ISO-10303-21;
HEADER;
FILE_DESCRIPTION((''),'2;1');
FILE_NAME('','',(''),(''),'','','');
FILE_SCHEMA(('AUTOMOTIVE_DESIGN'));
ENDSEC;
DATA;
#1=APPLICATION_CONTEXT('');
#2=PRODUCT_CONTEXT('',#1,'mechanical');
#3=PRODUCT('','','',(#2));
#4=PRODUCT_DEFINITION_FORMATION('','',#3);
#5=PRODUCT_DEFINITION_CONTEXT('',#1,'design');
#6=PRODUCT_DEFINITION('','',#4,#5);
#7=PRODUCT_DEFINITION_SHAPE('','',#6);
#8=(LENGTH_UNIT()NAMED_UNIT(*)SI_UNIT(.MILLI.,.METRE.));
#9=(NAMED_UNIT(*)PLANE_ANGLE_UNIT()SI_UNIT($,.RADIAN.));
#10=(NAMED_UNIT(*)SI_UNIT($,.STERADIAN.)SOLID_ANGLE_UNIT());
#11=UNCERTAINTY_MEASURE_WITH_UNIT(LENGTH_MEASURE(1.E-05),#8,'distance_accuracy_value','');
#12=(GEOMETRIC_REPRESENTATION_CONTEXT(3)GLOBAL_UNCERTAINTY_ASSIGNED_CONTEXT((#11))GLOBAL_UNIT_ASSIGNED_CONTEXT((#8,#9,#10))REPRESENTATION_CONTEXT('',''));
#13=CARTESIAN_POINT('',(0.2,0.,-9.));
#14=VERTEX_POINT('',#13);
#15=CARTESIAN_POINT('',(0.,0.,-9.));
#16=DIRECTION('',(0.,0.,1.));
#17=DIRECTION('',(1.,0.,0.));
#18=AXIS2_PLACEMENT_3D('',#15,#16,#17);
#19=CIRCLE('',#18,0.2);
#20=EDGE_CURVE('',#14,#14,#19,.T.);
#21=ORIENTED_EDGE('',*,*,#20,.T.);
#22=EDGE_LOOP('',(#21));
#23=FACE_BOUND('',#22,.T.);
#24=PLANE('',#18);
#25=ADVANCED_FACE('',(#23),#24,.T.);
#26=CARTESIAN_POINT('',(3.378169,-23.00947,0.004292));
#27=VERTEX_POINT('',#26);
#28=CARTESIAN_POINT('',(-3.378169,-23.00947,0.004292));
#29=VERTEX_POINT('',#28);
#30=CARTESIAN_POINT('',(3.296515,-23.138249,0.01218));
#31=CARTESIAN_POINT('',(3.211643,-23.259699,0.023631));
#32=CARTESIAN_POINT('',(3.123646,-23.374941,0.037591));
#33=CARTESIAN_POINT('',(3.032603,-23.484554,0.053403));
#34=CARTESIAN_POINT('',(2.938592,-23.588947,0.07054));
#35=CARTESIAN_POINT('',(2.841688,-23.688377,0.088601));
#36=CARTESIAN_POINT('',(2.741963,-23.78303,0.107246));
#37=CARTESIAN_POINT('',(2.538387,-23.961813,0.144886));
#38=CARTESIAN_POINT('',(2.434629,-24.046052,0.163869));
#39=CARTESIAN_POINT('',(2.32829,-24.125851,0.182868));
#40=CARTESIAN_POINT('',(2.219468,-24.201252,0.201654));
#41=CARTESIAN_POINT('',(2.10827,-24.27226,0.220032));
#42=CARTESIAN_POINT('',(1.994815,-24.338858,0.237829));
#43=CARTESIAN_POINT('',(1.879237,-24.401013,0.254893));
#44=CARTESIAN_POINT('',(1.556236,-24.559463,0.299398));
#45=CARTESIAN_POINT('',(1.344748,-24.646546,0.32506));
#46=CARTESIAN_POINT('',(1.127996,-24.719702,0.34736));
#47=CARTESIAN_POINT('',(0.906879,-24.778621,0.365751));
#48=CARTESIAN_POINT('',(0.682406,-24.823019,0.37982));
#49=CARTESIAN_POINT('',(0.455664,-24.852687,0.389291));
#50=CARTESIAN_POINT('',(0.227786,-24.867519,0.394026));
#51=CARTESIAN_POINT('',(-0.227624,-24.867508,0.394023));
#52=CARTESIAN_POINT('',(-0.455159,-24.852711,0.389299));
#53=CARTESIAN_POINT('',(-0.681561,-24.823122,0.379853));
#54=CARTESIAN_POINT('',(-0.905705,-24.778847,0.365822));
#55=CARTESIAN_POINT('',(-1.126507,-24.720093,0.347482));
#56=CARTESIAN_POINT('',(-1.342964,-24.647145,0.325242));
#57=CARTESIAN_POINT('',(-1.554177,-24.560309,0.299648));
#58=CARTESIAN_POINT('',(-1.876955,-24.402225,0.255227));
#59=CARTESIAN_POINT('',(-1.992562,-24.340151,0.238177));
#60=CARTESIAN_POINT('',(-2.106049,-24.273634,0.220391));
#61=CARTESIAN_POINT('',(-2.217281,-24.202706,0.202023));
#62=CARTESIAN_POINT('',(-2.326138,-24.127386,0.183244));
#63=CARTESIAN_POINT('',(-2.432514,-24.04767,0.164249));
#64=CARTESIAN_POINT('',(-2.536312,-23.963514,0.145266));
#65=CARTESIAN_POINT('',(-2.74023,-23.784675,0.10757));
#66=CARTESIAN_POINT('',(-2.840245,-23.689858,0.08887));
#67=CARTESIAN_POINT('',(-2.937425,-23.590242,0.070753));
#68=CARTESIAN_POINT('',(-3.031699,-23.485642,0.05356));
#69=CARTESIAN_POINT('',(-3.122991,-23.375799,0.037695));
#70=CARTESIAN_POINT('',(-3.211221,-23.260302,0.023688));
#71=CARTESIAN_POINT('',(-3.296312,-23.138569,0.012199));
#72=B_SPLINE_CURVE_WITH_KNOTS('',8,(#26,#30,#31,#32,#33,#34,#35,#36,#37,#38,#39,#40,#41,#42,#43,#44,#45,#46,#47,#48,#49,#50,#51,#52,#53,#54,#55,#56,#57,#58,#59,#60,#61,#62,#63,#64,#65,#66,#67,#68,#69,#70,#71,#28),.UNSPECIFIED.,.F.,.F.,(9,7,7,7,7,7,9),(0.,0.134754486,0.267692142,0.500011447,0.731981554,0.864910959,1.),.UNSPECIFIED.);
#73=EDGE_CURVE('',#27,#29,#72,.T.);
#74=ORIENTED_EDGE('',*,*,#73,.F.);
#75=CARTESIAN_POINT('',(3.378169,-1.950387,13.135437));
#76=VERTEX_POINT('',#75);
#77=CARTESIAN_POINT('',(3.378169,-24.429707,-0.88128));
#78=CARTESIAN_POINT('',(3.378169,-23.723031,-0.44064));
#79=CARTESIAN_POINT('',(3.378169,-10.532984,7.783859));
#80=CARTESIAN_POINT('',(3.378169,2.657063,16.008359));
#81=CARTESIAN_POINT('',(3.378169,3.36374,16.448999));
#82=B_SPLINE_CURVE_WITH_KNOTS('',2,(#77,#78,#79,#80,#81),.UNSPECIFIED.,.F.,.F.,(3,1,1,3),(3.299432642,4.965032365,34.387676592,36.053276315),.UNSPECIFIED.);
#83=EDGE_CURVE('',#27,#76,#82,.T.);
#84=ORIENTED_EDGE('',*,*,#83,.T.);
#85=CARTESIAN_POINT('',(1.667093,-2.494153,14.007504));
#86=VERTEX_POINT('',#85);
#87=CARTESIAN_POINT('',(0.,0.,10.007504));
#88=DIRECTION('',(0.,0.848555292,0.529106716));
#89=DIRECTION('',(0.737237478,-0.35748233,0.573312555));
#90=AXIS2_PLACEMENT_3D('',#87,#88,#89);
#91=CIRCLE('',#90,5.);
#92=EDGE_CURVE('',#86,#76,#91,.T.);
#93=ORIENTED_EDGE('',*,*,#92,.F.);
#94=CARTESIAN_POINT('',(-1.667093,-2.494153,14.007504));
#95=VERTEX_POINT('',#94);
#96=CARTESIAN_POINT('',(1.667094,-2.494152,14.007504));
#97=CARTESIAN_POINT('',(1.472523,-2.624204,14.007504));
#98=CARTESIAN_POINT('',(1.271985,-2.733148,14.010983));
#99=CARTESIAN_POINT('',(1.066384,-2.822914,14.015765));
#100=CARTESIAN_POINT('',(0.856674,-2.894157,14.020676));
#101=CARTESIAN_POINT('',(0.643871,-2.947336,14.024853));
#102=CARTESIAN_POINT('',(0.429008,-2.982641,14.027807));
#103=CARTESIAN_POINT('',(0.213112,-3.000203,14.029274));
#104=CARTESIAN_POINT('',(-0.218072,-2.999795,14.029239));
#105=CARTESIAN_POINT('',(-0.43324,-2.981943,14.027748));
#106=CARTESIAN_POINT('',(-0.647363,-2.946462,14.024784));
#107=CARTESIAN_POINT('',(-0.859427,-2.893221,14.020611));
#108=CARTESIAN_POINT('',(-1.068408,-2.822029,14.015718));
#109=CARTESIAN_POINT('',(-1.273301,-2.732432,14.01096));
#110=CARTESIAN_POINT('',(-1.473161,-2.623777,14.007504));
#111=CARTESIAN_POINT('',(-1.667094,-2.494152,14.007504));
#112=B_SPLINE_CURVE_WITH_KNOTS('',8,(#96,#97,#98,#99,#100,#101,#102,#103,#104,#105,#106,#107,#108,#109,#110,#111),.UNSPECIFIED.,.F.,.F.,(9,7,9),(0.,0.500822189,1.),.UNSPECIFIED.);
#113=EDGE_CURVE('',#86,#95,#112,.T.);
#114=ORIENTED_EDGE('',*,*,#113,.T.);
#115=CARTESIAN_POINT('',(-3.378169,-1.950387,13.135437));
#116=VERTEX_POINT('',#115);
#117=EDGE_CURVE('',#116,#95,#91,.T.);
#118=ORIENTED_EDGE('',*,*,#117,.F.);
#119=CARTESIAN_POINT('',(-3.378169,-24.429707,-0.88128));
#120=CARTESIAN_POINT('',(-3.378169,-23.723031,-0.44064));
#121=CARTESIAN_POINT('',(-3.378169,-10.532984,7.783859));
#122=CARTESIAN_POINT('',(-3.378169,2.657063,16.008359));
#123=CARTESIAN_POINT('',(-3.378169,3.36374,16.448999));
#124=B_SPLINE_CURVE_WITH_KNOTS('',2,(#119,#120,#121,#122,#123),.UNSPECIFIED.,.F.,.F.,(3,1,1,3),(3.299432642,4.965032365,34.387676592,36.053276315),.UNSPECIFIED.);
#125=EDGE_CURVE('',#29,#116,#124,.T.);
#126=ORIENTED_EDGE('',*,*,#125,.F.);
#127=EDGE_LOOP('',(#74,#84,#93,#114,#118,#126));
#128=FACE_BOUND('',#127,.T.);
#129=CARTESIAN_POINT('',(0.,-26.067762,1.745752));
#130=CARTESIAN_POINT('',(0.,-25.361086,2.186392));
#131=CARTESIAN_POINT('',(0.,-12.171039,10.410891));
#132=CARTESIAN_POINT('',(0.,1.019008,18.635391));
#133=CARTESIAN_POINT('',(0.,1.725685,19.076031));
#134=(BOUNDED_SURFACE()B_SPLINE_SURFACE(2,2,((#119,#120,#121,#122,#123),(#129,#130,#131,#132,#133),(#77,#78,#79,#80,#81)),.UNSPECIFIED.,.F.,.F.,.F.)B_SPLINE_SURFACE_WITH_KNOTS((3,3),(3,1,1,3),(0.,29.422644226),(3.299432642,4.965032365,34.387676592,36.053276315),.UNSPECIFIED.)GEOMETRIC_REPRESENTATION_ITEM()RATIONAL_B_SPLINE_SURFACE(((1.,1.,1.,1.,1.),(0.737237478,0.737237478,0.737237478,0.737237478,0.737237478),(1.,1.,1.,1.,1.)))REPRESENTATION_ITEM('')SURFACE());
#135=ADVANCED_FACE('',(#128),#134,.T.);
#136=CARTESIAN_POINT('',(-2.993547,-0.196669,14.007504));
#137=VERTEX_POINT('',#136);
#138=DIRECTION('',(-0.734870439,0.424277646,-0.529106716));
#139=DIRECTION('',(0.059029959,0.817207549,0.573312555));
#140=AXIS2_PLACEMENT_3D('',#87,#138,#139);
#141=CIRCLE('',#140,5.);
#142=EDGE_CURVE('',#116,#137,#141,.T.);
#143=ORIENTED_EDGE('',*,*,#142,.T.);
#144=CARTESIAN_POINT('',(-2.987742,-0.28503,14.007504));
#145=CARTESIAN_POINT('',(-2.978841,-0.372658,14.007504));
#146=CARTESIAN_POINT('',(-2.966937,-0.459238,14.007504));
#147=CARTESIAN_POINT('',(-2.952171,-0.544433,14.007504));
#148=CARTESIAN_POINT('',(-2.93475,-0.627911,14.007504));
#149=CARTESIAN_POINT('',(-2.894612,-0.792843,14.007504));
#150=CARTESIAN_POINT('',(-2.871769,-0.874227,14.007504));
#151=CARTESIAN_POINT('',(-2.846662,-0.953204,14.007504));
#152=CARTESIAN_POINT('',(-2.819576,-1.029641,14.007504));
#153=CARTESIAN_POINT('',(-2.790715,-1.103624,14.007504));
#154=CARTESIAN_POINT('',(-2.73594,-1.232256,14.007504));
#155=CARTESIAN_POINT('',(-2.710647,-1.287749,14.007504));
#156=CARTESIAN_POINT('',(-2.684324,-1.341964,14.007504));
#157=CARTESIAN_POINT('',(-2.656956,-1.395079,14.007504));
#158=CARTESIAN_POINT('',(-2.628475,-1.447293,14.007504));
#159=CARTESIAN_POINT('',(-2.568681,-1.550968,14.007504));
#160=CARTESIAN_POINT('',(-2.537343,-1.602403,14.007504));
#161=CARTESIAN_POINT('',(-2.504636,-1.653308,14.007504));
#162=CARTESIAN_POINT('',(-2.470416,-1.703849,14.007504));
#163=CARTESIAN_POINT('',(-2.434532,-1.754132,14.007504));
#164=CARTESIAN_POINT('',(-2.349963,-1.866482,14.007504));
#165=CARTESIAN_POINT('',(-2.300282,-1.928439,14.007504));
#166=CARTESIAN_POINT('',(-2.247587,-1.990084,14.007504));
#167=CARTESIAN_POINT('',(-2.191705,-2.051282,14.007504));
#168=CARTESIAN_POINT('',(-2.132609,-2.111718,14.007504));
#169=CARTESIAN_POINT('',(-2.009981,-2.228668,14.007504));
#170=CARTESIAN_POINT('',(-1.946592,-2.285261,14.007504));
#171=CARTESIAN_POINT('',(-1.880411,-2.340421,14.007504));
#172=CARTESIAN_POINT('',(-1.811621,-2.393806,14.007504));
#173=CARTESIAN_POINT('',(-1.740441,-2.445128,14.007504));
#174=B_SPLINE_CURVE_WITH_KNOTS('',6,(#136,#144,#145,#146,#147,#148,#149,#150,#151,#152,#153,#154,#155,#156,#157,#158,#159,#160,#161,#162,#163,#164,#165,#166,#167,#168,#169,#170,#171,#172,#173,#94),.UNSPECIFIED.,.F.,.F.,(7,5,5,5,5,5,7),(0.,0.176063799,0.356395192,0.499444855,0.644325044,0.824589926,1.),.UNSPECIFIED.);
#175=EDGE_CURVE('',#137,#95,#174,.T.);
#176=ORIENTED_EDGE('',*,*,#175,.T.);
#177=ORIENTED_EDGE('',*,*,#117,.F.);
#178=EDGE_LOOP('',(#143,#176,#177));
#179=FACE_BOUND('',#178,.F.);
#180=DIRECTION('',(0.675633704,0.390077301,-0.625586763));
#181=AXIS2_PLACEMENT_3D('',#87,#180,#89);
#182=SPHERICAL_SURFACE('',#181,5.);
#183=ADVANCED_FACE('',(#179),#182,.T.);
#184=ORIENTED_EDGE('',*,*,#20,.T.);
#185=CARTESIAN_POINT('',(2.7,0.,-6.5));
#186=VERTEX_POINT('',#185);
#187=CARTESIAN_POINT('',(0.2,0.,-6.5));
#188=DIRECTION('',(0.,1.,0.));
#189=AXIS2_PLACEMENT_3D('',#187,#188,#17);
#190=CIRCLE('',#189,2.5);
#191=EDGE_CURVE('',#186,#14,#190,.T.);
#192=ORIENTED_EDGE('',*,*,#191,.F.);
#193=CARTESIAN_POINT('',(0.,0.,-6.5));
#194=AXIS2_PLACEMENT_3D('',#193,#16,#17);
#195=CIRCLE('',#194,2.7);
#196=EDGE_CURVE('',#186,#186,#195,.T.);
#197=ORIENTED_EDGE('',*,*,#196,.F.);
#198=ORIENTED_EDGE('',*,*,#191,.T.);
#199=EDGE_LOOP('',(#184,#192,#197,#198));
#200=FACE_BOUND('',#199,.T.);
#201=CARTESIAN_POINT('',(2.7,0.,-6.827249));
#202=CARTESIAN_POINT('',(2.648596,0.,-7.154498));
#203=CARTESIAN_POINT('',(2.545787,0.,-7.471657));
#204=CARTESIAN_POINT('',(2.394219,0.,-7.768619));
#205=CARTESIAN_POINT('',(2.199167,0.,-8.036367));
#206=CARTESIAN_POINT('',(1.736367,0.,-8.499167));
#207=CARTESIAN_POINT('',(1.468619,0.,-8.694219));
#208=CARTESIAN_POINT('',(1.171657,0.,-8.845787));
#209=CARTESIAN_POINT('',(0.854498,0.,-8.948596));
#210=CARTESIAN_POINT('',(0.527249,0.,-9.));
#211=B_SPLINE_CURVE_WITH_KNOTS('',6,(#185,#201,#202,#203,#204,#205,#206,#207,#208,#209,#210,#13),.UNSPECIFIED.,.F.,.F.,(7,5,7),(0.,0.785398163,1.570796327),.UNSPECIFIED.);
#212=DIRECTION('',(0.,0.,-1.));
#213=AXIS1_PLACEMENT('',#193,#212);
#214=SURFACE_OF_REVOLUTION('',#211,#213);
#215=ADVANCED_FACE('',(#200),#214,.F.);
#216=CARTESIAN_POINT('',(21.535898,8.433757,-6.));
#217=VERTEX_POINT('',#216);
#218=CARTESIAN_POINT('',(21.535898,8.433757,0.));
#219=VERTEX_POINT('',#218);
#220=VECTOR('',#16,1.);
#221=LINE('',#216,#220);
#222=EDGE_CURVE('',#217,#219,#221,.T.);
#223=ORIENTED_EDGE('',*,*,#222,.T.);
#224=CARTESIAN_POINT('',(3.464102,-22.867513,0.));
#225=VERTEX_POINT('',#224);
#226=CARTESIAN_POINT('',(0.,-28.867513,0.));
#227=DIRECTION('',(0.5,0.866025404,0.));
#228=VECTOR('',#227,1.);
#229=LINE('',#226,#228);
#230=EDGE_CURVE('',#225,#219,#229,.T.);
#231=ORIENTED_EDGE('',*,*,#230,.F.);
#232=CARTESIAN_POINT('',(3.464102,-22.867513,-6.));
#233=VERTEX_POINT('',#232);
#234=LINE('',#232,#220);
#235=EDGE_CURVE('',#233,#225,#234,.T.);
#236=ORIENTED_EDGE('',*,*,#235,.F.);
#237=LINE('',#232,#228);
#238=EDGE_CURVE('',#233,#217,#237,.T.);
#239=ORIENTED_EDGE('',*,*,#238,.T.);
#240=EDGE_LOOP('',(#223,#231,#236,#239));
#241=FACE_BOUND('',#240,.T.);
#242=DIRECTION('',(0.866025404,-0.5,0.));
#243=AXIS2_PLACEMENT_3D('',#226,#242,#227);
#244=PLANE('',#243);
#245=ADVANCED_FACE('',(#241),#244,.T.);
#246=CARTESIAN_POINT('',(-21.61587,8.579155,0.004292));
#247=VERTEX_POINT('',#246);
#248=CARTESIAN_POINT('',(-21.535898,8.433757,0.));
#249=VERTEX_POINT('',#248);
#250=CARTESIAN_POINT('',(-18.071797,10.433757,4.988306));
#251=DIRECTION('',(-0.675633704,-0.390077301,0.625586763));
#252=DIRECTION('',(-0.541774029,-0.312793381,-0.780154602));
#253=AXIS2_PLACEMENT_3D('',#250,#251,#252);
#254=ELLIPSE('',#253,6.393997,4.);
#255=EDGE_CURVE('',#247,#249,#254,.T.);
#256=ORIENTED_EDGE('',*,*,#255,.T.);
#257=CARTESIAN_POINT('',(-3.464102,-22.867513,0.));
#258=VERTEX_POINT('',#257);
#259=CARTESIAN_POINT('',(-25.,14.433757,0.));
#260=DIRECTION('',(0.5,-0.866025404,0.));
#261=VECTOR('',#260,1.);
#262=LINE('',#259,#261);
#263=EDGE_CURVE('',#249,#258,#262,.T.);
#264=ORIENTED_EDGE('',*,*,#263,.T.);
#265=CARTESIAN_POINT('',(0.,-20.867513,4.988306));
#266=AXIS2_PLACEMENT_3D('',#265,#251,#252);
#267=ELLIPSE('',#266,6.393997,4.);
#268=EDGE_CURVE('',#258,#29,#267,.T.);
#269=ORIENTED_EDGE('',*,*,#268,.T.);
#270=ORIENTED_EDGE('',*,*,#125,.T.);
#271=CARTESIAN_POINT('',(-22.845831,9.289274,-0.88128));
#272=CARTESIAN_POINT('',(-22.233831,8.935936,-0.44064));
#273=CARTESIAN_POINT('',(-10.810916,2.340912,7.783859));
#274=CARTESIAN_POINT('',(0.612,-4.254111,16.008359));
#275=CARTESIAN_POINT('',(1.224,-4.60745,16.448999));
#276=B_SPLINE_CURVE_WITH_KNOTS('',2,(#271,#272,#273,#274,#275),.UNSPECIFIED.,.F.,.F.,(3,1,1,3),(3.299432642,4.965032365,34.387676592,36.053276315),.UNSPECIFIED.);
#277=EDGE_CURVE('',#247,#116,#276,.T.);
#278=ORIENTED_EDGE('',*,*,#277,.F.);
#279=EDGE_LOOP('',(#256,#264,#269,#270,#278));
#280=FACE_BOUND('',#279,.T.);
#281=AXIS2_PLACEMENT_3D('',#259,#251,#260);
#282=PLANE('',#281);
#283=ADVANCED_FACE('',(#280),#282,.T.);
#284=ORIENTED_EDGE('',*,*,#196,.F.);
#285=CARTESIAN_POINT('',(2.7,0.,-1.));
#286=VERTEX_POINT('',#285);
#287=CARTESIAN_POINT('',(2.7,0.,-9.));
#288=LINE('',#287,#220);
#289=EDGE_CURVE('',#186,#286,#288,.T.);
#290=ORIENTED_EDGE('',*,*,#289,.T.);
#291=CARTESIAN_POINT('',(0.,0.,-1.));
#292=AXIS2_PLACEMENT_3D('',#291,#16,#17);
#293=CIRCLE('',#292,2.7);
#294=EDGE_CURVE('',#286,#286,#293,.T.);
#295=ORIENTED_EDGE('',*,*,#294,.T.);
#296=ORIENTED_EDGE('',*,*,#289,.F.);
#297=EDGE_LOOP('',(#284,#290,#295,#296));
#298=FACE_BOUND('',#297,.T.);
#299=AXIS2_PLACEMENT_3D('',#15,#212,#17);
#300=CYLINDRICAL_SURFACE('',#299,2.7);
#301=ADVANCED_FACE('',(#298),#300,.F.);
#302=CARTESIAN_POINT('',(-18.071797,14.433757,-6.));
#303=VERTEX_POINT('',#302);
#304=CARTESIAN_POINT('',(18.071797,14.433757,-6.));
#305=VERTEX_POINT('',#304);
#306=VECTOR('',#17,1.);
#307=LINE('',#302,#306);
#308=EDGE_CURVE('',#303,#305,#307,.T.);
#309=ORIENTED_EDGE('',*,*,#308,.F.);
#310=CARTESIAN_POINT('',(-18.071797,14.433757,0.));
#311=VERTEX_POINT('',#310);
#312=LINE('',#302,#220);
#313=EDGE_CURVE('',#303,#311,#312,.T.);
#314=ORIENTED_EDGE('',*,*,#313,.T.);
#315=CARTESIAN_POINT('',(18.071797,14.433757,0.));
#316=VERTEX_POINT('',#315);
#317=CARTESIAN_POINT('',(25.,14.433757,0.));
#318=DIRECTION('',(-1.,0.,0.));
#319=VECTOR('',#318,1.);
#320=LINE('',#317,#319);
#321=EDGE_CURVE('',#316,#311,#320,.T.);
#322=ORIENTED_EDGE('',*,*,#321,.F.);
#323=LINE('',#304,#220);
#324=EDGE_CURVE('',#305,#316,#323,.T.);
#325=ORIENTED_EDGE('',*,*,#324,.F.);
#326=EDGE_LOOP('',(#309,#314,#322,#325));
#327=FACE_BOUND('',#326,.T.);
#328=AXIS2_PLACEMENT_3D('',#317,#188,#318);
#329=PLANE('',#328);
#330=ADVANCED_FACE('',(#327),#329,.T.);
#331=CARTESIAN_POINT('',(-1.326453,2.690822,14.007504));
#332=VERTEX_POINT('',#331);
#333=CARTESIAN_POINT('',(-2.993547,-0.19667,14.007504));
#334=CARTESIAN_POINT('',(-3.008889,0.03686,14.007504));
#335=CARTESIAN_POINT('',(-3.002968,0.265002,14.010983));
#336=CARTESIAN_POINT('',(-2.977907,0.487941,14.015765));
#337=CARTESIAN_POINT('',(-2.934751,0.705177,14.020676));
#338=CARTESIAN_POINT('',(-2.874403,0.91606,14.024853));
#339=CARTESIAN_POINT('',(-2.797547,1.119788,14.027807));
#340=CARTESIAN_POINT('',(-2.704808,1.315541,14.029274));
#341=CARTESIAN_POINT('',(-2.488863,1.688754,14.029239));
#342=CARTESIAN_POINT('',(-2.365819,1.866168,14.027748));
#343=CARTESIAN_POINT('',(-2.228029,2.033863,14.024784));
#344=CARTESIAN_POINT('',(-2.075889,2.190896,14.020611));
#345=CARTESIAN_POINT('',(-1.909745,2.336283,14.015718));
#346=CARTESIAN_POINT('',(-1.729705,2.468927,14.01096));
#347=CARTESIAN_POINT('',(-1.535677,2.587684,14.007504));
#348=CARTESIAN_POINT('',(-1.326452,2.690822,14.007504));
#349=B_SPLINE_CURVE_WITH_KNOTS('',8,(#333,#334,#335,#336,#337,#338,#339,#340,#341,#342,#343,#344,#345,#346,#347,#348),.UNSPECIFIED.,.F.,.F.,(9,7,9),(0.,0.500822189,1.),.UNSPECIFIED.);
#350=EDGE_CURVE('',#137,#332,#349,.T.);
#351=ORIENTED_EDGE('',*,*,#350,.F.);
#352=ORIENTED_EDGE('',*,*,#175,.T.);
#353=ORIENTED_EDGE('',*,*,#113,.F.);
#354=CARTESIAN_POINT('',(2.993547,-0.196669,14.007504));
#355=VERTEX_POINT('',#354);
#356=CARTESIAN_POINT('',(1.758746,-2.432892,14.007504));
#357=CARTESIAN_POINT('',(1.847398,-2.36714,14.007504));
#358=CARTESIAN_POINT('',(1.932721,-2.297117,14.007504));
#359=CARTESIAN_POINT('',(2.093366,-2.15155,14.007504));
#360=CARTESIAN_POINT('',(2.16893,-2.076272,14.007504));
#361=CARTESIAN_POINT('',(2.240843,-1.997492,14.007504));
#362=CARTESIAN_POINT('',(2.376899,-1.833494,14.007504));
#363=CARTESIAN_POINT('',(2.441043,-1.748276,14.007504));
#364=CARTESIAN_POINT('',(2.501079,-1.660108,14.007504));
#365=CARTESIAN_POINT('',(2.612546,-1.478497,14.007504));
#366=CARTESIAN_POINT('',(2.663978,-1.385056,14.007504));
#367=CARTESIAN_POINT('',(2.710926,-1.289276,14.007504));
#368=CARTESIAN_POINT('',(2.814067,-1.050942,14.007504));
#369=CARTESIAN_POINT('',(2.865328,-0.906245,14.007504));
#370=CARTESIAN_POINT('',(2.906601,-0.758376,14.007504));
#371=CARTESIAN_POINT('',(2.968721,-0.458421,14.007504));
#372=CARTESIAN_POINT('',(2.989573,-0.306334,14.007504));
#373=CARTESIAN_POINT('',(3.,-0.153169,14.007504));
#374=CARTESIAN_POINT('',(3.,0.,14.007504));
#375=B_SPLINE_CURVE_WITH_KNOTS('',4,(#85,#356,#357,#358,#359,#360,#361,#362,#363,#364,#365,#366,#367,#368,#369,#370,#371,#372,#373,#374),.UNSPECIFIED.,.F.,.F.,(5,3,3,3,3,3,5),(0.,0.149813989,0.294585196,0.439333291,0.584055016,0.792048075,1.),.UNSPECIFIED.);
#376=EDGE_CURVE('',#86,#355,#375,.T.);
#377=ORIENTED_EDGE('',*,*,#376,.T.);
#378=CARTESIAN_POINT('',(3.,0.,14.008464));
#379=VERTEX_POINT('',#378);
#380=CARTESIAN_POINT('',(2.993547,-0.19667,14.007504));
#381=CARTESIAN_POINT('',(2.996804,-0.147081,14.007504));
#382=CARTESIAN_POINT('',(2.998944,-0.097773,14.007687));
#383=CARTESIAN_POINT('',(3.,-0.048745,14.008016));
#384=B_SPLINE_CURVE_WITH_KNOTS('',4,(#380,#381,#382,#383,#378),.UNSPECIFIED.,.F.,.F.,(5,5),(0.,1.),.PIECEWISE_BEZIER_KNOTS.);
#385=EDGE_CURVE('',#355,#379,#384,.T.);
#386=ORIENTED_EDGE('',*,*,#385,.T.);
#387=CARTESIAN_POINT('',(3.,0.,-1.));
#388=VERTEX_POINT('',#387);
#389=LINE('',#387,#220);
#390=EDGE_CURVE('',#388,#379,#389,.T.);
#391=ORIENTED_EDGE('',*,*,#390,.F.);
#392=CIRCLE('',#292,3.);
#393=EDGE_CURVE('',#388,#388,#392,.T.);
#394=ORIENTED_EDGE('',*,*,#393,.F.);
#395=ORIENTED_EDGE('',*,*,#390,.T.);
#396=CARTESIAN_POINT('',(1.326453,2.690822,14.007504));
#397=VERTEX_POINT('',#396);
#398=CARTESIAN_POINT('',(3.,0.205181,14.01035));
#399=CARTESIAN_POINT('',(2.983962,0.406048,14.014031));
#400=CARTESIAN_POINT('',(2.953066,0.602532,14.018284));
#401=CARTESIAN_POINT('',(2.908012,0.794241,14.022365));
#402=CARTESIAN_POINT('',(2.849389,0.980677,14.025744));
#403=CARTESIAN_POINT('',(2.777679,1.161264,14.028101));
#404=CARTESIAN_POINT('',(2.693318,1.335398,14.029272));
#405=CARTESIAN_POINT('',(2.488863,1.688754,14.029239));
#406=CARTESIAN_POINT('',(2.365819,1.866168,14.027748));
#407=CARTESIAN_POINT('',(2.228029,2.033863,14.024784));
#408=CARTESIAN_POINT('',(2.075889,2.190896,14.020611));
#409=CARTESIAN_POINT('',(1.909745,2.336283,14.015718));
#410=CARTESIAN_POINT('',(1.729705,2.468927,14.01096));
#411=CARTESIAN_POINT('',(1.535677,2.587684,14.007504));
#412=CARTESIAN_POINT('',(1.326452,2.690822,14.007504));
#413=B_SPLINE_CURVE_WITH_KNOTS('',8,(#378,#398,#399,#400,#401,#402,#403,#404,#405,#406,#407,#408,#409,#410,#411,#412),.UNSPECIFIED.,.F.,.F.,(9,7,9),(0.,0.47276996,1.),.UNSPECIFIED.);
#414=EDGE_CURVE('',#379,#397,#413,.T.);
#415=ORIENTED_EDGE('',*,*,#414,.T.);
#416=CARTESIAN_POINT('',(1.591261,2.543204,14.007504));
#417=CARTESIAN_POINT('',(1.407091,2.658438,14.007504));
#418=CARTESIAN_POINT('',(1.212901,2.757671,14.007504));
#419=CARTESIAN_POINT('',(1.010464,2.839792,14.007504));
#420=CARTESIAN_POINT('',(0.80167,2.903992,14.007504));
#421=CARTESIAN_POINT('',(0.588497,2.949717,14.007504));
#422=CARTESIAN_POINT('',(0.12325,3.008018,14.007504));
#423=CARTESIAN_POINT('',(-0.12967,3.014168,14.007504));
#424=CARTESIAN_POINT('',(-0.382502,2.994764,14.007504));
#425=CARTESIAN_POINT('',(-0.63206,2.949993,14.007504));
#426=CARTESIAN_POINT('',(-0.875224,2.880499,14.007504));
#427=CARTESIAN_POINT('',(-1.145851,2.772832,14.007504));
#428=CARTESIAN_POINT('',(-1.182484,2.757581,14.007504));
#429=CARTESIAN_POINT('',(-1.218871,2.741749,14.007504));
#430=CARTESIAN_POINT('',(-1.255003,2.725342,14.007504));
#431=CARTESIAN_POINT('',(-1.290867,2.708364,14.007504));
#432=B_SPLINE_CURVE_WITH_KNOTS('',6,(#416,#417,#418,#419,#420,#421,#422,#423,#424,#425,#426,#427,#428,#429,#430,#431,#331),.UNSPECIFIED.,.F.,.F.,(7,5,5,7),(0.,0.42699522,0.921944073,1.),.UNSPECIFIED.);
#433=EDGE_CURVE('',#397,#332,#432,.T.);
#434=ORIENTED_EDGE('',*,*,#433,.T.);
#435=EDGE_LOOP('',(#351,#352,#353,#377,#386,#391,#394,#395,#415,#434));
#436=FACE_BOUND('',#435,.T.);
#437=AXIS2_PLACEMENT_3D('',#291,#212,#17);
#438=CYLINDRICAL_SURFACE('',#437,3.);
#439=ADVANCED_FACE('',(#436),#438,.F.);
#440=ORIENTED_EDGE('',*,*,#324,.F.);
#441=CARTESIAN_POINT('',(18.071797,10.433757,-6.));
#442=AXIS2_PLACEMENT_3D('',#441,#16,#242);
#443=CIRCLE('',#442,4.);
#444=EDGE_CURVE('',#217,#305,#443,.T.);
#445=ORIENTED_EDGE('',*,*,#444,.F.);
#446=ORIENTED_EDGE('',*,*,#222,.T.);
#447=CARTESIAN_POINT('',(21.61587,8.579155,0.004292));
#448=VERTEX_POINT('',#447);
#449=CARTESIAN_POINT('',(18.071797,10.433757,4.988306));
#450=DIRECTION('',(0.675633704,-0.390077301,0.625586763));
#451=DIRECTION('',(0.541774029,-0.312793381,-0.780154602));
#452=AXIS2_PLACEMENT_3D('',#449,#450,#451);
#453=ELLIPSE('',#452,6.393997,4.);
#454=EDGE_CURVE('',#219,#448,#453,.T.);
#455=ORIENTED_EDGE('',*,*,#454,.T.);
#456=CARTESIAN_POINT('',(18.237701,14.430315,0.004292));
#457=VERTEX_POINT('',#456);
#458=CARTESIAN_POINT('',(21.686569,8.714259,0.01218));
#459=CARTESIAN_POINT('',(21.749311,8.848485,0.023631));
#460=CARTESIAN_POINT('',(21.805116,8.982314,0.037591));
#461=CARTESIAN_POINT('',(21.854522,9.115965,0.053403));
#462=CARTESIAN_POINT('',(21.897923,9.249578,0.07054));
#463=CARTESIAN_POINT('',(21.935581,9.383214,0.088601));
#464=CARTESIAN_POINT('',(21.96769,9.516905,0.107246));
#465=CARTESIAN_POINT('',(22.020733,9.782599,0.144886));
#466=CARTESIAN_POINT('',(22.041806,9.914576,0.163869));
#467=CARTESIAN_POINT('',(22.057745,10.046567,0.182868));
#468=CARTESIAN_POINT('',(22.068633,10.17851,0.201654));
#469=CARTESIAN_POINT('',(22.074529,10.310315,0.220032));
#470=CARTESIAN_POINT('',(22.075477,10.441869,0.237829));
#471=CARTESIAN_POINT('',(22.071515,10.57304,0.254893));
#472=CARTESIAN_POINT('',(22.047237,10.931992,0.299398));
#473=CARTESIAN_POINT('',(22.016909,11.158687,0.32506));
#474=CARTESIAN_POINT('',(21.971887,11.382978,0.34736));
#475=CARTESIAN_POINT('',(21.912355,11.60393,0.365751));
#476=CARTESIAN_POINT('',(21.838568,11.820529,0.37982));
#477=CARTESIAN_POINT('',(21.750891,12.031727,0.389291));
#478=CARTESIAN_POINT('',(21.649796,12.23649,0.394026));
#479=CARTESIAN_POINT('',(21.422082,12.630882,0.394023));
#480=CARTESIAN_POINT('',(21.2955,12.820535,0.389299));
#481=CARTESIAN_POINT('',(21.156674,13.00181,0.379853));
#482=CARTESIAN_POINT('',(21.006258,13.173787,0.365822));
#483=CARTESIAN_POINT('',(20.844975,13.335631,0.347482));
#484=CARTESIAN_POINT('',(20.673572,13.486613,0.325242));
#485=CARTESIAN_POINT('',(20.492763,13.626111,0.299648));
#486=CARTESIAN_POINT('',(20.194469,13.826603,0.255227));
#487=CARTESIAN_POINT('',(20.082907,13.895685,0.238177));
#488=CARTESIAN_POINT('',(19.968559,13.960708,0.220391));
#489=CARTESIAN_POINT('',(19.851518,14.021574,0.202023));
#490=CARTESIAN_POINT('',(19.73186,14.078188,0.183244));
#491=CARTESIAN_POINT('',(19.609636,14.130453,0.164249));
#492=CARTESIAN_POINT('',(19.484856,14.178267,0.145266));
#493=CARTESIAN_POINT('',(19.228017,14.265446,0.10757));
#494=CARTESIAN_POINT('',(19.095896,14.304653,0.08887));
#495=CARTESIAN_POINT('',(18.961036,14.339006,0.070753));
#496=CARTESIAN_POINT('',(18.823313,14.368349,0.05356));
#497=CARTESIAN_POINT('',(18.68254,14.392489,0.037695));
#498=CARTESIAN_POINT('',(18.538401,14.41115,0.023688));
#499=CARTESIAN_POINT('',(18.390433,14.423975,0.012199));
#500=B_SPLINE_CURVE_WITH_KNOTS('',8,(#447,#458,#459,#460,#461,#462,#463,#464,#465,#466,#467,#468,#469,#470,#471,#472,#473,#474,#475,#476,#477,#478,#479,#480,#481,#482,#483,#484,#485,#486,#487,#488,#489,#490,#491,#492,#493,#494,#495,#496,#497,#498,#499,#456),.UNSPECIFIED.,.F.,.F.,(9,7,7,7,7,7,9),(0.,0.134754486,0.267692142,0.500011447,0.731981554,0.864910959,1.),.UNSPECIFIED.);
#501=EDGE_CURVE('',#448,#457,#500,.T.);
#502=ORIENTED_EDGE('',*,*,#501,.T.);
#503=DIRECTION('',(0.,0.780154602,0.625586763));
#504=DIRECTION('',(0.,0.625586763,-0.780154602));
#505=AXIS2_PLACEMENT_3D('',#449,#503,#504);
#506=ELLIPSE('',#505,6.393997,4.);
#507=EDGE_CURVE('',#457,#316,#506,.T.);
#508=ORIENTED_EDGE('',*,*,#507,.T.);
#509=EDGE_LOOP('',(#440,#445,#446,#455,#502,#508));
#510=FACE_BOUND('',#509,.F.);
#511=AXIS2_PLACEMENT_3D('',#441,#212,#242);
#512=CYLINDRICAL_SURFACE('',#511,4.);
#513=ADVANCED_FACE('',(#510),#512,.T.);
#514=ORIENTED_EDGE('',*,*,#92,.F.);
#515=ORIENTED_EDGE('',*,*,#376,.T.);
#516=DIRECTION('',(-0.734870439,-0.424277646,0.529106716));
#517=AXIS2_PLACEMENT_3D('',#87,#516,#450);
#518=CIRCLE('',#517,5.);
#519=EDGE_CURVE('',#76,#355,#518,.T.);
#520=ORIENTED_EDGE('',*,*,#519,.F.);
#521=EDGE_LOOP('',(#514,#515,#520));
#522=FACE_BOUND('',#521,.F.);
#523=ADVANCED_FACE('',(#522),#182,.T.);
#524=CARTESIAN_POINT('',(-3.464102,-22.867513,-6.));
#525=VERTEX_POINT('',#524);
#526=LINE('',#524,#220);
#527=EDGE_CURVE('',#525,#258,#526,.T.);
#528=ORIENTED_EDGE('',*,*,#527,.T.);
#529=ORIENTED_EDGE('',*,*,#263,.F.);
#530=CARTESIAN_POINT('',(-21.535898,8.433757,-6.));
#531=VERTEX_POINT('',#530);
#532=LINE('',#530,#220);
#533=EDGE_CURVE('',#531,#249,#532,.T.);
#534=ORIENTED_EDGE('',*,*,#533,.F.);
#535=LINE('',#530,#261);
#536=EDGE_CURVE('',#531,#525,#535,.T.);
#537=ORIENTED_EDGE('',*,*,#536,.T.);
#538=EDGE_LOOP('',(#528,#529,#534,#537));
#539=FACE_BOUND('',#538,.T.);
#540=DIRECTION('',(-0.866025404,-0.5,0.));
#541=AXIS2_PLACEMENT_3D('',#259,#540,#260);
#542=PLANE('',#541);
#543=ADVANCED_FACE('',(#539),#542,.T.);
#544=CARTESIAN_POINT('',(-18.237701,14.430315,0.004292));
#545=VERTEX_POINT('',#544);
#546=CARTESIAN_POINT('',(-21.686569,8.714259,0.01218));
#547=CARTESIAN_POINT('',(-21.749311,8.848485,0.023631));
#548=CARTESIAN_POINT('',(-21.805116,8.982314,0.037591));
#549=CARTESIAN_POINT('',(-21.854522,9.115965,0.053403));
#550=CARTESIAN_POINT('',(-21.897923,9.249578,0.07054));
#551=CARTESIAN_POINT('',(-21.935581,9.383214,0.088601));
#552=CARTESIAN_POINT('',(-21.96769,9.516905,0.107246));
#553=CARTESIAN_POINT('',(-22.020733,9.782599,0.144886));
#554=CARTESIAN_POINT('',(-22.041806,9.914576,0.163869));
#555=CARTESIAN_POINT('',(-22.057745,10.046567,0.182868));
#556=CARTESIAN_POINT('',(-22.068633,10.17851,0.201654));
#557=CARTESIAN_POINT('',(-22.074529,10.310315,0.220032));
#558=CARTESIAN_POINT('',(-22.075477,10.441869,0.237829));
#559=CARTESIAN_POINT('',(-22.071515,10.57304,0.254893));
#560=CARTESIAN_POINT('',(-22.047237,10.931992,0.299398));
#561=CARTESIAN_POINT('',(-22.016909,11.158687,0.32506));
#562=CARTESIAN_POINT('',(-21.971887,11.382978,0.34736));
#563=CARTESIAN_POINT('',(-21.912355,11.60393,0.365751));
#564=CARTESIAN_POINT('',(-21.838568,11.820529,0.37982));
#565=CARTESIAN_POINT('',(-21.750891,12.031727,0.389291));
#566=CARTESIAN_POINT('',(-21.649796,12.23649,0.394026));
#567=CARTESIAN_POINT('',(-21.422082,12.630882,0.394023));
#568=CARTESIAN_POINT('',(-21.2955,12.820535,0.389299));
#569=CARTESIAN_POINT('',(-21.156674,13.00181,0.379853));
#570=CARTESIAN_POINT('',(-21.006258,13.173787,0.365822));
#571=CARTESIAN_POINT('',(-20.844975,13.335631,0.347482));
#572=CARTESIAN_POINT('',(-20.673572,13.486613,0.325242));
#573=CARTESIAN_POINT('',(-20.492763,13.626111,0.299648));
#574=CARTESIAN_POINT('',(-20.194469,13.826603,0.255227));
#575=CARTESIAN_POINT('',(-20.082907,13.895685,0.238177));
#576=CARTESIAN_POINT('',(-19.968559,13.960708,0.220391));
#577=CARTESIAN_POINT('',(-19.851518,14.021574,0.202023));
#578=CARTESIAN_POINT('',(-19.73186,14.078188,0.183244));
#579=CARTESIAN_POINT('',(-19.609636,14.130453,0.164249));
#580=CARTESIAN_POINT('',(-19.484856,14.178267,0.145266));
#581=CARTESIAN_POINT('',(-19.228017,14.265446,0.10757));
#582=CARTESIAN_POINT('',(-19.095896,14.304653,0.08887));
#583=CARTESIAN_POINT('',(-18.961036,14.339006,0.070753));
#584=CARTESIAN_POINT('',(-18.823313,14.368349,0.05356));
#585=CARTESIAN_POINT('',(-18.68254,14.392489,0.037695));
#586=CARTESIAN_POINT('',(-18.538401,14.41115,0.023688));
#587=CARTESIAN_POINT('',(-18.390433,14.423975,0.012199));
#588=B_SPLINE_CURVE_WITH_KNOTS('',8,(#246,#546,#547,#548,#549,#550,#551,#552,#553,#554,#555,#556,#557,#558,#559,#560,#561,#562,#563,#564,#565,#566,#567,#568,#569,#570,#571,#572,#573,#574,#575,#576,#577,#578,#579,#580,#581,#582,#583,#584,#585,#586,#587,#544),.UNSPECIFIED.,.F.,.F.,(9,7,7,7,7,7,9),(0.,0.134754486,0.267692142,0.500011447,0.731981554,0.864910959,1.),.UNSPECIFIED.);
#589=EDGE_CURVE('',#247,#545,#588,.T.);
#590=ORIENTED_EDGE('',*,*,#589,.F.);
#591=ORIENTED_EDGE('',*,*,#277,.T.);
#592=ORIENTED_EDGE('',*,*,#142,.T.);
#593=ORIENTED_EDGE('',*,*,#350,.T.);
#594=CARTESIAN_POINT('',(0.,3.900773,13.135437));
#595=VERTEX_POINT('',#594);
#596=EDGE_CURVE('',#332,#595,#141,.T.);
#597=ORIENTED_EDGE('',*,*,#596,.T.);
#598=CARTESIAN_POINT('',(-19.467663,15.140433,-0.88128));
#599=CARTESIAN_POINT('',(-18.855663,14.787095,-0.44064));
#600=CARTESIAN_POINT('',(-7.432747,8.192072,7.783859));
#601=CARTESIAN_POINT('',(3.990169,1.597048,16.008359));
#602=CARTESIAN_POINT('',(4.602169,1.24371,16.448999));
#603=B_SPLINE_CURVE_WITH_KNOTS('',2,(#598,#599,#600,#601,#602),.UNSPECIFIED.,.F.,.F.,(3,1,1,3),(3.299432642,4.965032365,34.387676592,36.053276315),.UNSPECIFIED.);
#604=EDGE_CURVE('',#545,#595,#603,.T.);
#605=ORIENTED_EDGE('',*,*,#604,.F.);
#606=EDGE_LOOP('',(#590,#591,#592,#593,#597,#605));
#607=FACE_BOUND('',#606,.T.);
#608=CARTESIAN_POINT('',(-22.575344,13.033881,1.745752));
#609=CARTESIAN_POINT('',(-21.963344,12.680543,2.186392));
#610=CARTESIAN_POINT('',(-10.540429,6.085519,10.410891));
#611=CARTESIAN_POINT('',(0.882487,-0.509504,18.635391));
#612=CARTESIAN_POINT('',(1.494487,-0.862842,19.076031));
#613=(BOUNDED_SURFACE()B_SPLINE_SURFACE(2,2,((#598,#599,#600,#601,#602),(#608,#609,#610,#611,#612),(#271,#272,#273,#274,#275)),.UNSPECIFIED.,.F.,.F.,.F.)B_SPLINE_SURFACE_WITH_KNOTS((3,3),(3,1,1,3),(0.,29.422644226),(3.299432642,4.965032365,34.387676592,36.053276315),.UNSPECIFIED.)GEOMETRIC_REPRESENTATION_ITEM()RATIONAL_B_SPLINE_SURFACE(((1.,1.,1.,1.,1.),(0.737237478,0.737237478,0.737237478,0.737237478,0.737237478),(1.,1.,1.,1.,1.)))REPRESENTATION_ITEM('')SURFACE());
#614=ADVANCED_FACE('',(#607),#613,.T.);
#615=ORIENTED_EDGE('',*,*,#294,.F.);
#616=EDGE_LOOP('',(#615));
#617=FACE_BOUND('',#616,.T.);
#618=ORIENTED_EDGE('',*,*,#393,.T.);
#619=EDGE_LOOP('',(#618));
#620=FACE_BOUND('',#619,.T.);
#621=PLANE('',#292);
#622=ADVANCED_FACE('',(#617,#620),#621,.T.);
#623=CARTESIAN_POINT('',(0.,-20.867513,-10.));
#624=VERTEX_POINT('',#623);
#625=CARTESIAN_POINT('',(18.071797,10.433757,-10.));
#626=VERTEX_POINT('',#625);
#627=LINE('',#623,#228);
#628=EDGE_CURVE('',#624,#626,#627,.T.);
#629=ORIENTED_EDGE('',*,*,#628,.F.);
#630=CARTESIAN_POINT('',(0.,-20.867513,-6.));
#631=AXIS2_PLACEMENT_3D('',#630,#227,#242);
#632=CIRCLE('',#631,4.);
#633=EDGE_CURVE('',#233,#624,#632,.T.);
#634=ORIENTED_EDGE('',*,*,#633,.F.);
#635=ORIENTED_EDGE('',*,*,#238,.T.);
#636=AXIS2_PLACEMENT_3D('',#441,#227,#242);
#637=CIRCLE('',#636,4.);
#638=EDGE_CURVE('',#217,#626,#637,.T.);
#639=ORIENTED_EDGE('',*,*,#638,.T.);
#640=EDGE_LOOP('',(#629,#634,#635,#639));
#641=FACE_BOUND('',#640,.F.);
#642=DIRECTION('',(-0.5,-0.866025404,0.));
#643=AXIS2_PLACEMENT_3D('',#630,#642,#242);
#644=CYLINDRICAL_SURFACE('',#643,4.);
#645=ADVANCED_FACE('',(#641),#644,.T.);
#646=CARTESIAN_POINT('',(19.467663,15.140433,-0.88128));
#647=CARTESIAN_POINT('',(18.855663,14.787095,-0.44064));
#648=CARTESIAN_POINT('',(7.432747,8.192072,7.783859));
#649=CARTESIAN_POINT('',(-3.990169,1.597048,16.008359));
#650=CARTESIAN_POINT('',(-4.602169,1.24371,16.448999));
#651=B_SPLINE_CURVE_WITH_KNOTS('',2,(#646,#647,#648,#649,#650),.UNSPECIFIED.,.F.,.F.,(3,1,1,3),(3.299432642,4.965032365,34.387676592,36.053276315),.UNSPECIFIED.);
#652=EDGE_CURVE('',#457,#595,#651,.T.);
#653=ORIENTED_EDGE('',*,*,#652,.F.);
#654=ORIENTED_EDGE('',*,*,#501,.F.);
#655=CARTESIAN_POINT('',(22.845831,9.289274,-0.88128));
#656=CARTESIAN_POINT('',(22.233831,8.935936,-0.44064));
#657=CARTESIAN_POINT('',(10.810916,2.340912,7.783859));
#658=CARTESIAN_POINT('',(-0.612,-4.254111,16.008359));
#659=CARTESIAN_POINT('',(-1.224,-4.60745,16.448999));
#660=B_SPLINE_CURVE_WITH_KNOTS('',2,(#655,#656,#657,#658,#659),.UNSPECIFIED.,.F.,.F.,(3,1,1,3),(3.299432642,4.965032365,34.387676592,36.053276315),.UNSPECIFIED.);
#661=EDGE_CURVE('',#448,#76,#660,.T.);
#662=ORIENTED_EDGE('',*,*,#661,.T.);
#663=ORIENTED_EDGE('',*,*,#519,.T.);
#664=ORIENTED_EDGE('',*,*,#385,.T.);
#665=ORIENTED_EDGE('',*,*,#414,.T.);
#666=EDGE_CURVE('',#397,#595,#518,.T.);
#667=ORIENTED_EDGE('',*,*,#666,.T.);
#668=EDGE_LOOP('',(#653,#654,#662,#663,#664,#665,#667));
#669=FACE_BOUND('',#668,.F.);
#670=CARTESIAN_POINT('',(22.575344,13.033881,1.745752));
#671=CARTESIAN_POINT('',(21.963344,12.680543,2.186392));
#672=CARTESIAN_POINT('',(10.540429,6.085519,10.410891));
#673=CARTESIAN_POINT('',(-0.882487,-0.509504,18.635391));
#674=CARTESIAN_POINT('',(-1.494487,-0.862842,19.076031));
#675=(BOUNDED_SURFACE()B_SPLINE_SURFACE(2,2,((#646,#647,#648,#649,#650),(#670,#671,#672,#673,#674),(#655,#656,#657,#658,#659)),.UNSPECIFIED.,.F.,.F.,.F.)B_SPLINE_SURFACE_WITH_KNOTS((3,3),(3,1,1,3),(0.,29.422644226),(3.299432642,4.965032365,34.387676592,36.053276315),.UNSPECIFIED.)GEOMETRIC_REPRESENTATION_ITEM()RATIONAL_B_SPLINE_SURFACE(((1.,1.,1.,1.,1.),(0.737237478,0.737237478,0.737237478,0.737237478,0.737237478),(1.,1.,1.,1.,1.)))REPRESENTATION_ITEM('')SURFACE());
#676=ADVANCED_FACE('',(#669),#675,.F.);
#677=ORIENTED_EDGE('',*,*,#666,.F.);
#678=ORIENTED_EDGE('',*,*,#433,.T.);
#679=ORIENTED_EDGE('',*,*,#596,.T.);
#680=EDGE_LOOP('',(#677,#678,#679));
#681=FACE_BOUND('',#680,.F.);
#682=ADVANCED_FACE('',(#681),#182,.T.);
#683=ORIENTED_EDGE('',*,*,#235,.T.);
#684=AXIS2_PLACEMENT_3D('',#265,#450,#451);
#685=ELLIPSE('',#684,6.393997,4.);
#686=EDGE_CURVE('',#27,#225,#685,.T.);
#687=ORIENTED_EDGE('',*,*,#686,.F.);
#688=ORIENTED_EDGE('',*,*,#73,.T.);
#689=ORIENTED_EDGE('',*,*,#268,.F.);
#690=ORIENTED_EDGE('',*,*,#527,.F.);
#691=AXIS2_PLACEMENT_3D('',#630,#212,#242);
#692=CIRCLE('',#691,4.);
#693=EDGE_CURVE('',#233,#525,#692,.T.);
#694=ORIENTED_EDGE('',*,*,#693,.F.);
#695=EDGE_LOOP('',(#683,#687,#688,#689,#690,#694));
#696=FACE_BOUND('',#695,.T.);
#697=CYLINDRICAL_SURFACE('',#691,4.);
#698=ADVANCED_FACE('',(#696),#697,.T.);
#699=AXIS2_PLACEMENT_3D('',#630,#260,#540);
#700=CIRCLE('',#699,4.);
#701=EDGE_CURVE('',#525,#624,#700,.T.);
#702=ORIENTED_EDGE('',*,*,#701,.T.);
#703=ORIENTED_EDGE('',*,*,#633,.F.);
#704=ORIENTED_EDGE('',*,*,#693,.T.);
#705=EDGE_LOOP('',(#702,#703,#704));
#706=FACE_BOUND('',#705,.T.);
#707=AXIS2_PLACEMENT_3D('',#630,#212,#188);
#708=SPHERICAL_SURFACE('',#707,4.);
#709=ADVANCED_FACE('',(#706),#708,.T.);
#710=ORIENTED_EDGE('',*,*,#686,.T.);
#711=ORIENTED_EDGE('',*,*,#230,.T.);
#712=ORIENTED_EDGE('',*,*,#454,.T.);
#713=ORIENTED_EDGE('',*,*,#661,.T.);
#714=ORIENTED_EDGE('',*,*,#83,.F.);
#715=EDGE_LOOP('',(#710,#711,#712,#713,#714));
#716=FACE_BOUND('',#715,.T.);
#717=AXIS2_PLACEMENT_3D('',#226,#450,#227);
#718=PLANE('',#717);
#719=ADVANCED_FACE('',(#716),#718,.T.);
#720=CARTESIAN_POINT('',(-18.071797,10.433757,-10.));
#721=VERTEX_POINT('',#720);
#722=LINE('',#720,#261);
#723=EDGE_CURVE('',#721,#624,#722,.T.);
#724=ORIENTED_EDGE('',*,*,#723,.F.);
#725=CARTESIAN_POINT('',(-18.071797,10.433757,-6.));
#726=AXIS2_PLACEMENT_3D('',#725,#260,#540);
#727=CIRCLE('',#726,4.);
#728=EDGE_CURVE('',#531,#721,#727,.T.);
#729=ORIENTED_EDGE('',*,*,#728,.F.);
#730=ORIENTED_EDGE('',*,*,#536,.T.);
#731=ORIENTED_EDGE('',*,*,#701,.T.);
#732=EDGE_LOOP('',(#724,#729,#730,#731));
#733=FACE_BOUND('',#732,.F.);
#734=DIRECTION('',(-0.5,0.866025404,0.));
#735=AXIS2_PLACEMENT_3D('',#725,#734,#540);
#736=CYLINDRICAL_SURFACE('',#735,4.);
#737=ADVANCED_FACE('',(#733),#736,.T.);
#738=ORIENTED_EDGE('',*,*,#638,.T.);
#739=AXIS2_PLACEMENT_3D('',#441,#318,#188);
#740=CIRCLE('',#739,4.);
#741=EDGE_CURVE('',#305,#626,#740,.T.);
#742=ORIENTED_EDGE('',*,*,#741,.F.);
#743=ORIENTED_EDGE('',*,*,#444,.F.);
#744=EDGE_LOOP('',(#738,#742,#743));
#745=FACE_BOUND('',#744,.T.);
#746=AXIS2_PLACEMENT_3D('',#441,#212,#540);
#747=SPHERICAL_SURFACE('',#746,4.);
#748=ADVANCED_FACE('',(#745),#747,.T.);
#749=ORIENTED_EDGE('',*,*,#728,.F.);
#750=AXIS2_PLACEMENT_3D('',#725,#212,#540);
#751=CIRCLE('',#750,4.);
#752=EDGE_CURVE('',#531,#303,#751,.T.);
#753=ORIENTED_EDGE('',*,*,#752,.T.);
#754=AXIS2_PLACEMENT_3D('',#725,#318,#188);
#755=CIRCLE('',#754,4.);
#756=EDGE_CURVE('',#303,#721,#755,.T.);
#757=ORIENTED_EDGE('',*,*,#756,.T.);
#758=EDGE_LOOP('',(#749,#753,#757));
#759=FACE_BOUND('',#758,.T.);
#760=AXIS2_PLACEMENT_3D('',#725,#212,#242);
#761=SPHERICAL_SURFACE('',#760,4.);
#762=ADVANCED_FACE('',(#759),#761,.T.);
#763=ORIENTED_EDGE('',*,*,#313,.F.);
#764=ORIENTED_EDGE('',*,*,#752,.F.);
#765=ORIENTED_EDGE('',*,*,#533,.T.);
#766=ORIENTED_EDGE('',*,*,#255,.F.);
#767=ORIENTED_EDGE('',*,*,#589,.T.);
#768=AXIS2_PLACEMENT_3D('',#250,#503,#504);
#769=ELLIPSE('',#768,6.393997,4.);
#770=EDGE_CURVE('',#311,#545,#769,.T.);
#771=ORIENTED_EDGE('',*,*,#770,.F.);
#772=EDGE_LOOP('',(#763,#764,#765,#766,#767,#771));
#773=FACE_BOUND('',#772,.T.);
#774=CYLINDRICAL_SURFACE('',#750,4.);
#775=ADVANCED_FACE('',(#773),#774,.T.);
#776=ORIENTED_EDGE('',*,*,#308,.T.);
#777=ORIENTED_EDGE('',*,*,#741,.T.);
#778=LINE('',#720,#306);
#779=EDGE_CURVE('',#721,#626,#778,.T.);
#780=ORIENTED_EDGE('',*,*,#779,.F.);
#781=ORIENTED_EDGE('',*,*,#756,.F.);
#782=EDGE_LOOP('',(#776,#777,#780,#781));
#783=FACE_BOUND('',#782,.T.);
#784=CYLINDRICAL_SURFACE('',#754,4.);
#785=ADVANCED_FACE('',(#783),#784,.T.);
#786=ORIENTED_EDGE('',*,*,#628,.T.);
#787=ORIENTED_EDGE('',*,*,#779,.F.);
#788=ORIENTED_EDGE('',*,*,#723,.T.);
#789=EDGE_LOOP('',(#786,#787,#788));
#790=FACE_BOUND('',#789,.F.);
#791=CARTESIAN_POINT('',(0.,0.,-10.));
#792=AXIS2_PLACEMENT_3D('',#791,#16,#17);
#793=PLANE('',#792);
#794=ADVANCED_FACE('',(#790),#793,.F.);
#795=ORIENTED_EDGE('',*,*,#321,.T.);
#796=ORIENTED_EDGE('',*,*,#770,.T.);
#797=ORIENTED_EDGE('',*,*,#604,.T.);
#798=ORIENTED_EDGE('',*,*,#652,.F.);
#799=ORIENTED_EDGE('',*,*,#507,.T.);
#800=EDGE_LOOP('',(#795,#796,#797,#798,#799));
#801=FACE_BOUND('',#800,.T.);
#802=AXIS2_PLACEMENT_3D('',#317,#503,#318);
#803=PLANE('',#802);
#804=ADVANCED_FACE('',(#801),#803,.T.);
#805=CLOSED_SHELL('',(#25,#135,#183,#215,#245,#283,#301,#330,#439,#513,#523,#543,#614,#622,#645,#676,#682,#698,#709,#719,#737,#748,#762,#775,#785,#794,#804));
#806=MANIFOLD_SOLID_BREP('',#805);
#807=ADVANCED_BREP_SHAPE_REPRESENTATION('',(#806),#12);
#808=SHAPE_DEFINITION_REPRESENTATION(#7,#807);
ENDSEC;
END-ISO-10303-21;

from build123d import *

# Parameters (mm, degrees)
F4_R          = 5
F9_DEPTH      = 10
F10_T1_DEPTH  = 23.3205080757
F10_T3_DEPTH  = 36.1435935394
F10_T5_DEPTH  = 36.1435935394
F10_T7_DEPTH  = 36.1435935394
F10_T12_DEPTH = 4
F10_T18_DEPTH = 4
F10_T24_DEPTH = 4
F6_R          = 2.7
F11_DEPTH     = 8
F8_R          = 3
F12_DEPTH     = 25
F13_R         = 2.5


# Not quite as in the source:
# - a fillet or chamfer that OpenCascade refuses, or shapes differently, is made with other operations: its cross-section is extruded or revolved along the edge and cut away or added


with BuildPart() as f3:
    # F0 (on Top) → F3 section 0
    with BuildSketch(Plane.XY, mode=Mode.PRIVATE) as f3_s0:
        Polygon((25, 14.4337567297), (-25, 14.4337567297), (0, -28.8675134595), align=None)
    loft([f3_s0.sketch, Vertex(0, 0, 18)])

    # F4
    f4_edges = [f3.edges().sort_by_distance(p)[0] for p in [
        (12.5, 7.216878, 9),
        (0, -14.433757, 9),
        (-12.5, 7.216878, 9),
    ]]
    fillet(f4_edges, radius=F4_R)

    # F0 (on Top) → F9 (join)
    with BuildSketch(Plane.XY):
        Polygon((25, 14.4337567297), (-25, 14.4337567297), (0, -28.8675134595), align=None)
    extrude(amount=-F9_DEPTH)

    # F10: fillet of radius 4 on 6 edges, made by hand

    # F10_s2 → F10_t1 (cut)
    with BuildSketch(Plane.XY.offset(-6)):
        with BuildLine():
            ThreePointArc((21.5358983849, 8.4337567297), (21.5358983849, 12.4337567297), (18.0717967697, 14.4337567297))
            Line((18.0717967697, 14.4337567297), (25, 14.4337567297))
            Line((25, 14.4337567297), (21.5358983849, 8.4337567297))
        make_face()
        with BuildLine():
            ThreePointArc((-21.5358983849, 8.4337567297), (-21.5358983849, 12.4337567297), (-18.0717967697, 14.4337567297))
            Line((-18.0717967697, 14.4337567297), (-25, 14.4337567297))
            Line((-25, 14.4337567297), (-21.5358983849, 8.4337567297))
        make_face()
        with BuildLine():
            ThreePointArc((3.4641016151, -22.8675134595), (0, -24.8675134595), (-3.4641016151, -22.8675134595))
            Line((-3.4641016151, -22.8675134595), (0, -28.8675134595))
            Line((0, -28.8675134595), (3.4641016151, -22.8675134595))
        make_face()
    extrude(amount=F10_T1_DEPTH, mode=Mode.SUBTRACT)

    # F10_s4 → F10_t3 (cut)
    with BuildSketch(Plane.YZ.offset(-18.0717967697)):
        with BuildLine():
            ThreePointArc((14.4337567297, -6), (13.2621838545, -8.8284271247), (10.4337567297, -10))
            Line((10.4337567297, -10), (14.4337567297, -10))
            Line((14.4337567297, -10), (14.4337567297, -6))
        make_face()
    extrude(amount=F10_T3_DEPTH, mode=Mode.SUBTRACT)

    # F10_s6 → F10_t5 (cut)
    with BuildSketch(Plane(origin=(-9.0358983849, 15.6506350946, 0), x_dir=(0, 0, 1), z_dir=(0.5, -0.8660254038, 0))):
        with BuildLine():
            ThreePointArc((-6, 14.4337567297), (-8.8284271247, 13.2621838545), (-10, 10.4337567297))
            Line((-10, 10.4337567297), (-10, 14.4337567297))
            Line((-10, 14.4337567297), (-6, 14.4337567297))
        make_face()
    extrude(amount=F10_T5_DEPTH, mode=Mode.SUBTRACT)

    # F10_s8 → F10_t7 (cut)
    with BuildSketch(Plane(origin=(-9.0358983849, -15.6506350946, 0), x_dir=(0, 0, 1), z_dir=(0.5, 0.8660254038, 0))):
        with BuildLine():
            ThreePointArc((-6, 14.4337567297), (-8.8284271247, 13.2621838545), (-10, 10.4337567297))
            Line((-10, 10.4337567297), (-10, 14.4337567297))
            Line((-10, 14.4337567297), (-6, 14.4337567297))
        make_face()
    extrude(amount=F10_T7_DEPTH, mode=Mode.SUBTRACT)


with BuildPart() as f10_tool10:
    # F10_s11 → F10_t12 (new body)
    with BuildSketch(Plane.XY.offset(-6)):
        Polygon((18.0717967697, 10.4337567297), (21.5358983849, 8.4337567297), (25, 14.4337567297), (18.0717967697, 14.4337567297), align=None)
    extrude(amount=-F10_T12_DEPTH)

    # F10_s13 → F10_t14 (revolve, cut)
    with BuildSketch(Plane(origin=(18.0717967697, 10.4337567297, -6), x_dir=(-0.8660254038, -0.5, 0), z_dir=(0.5, -0.8660254038, 0))):
        with BuildLine():
            ThreePointArc((0, -4), (4, 0), (0, 4))
            Line((0, 4), (0, -4))
        make_face()
    revolve(axis=Axis((18.0717967697, 10.4337567297, -6), (0, 0, -1)), mode=Mode.SUBTRACT)


with BuildPart() as f3_1:
    add(f3.part)

    # F10_t9: cut F10_tool10
    add(f10_tool10.part, mode=Mode.SUBTRACT)


with BuildPart() as f10_tool16:
    # F10_s17 → F10_t18 (new body)
    with BuildSketch(Plane.XY.offset(-6)):
        Polygon((-18.0717967697, 10.4337567297), (-21.5358983849, 8.4337567297), (-25, 14.4337567297), (-18.0717967697, 14.4337567297), align=None)
    extrude(amount=-F10_T18_DEPTH)

    # F10_s19 → F10_t20 (revolve, cut)
    with BuildSketch(Plane(origin=(-18.0717967697, 10.4337567297, -6), x_dir=(0.8660254038, -0.5, 0), z_dir=(0.5, 0.8660254038, 0))):
        with BuildLine():
            ThreePointArc((0, -4), (4, 0), (0, 4))
            Line((0, 4), (0, -4))
        make_face()
    revolve(axis=Axis((-18.0717967697, 10.4337567297, -6), (0, 0, -1)), mode=Mode.SUBTRACT)


with BuildPart() as f3_2:
    add(f3_1.part)

    # F10_t15: cut F10_tool16
    add(f10_tool16.part, mode=Mode.SUBTRACT)


with BuildPart() as f10_tool22:
    # F10_s23 → F10_t24 (new body)
    with BuildSketch(Plane.XY.offset(-6)):
        Polygon((0, -20.8675134595), (3.4641016151, -22.8675134595), (0, -28.8675134595), (-3.4641016151, -22.8675134595), align=None)
    extrude(amount=-F10_T24_DEPTH)

    # F10_s25 → F10_t26 (revolve, cut)
    with BuildSketch(Plane(origin=(0, -20.8675134595, -6), x_dir=(0, 1, 0), z_dir=(-1, 0, 0))):
        with BuildLine():
            ThreePointArc((0, -4), (4, 0), (0, 4))
            Line((0, 4), (0, -4))
        make_face()
    revolve(axis=Axis((0, -20.8675134595, -6), (0, 0, -1)), mode=Mode.SUBTRACT)


with BuildPart() as f3_3:
    add(f3_2.part)

    # F10_t21: cut F10_tool22
    add(f10_tool22.part, mode=Mode.SUBTRACT)

    # F6 (on offset) → F11 (cut)
    with BuildSketch(Plane.XY.offset(-9)):
        Circle(F6_R)
    extrude(amount=F11_DEPTH, mode=Mode.SUBTRACT)

    # F8 (on offset) → F12 (cut)
    with BuildSketch(Plane.XY.offset(-1)):
        Circle(F8_R)
    extrude(amount=F12_DEPTH, mode=Mode.SUBTRACT)

    # F13
    f13_edges = [f3_3.edges().sort_by_distance(p)[0] for p in [
        (-2.7, 0, -9),
    ]]
    fillet(f13_edges, radius=F13_R)


solid = f3_3.part
